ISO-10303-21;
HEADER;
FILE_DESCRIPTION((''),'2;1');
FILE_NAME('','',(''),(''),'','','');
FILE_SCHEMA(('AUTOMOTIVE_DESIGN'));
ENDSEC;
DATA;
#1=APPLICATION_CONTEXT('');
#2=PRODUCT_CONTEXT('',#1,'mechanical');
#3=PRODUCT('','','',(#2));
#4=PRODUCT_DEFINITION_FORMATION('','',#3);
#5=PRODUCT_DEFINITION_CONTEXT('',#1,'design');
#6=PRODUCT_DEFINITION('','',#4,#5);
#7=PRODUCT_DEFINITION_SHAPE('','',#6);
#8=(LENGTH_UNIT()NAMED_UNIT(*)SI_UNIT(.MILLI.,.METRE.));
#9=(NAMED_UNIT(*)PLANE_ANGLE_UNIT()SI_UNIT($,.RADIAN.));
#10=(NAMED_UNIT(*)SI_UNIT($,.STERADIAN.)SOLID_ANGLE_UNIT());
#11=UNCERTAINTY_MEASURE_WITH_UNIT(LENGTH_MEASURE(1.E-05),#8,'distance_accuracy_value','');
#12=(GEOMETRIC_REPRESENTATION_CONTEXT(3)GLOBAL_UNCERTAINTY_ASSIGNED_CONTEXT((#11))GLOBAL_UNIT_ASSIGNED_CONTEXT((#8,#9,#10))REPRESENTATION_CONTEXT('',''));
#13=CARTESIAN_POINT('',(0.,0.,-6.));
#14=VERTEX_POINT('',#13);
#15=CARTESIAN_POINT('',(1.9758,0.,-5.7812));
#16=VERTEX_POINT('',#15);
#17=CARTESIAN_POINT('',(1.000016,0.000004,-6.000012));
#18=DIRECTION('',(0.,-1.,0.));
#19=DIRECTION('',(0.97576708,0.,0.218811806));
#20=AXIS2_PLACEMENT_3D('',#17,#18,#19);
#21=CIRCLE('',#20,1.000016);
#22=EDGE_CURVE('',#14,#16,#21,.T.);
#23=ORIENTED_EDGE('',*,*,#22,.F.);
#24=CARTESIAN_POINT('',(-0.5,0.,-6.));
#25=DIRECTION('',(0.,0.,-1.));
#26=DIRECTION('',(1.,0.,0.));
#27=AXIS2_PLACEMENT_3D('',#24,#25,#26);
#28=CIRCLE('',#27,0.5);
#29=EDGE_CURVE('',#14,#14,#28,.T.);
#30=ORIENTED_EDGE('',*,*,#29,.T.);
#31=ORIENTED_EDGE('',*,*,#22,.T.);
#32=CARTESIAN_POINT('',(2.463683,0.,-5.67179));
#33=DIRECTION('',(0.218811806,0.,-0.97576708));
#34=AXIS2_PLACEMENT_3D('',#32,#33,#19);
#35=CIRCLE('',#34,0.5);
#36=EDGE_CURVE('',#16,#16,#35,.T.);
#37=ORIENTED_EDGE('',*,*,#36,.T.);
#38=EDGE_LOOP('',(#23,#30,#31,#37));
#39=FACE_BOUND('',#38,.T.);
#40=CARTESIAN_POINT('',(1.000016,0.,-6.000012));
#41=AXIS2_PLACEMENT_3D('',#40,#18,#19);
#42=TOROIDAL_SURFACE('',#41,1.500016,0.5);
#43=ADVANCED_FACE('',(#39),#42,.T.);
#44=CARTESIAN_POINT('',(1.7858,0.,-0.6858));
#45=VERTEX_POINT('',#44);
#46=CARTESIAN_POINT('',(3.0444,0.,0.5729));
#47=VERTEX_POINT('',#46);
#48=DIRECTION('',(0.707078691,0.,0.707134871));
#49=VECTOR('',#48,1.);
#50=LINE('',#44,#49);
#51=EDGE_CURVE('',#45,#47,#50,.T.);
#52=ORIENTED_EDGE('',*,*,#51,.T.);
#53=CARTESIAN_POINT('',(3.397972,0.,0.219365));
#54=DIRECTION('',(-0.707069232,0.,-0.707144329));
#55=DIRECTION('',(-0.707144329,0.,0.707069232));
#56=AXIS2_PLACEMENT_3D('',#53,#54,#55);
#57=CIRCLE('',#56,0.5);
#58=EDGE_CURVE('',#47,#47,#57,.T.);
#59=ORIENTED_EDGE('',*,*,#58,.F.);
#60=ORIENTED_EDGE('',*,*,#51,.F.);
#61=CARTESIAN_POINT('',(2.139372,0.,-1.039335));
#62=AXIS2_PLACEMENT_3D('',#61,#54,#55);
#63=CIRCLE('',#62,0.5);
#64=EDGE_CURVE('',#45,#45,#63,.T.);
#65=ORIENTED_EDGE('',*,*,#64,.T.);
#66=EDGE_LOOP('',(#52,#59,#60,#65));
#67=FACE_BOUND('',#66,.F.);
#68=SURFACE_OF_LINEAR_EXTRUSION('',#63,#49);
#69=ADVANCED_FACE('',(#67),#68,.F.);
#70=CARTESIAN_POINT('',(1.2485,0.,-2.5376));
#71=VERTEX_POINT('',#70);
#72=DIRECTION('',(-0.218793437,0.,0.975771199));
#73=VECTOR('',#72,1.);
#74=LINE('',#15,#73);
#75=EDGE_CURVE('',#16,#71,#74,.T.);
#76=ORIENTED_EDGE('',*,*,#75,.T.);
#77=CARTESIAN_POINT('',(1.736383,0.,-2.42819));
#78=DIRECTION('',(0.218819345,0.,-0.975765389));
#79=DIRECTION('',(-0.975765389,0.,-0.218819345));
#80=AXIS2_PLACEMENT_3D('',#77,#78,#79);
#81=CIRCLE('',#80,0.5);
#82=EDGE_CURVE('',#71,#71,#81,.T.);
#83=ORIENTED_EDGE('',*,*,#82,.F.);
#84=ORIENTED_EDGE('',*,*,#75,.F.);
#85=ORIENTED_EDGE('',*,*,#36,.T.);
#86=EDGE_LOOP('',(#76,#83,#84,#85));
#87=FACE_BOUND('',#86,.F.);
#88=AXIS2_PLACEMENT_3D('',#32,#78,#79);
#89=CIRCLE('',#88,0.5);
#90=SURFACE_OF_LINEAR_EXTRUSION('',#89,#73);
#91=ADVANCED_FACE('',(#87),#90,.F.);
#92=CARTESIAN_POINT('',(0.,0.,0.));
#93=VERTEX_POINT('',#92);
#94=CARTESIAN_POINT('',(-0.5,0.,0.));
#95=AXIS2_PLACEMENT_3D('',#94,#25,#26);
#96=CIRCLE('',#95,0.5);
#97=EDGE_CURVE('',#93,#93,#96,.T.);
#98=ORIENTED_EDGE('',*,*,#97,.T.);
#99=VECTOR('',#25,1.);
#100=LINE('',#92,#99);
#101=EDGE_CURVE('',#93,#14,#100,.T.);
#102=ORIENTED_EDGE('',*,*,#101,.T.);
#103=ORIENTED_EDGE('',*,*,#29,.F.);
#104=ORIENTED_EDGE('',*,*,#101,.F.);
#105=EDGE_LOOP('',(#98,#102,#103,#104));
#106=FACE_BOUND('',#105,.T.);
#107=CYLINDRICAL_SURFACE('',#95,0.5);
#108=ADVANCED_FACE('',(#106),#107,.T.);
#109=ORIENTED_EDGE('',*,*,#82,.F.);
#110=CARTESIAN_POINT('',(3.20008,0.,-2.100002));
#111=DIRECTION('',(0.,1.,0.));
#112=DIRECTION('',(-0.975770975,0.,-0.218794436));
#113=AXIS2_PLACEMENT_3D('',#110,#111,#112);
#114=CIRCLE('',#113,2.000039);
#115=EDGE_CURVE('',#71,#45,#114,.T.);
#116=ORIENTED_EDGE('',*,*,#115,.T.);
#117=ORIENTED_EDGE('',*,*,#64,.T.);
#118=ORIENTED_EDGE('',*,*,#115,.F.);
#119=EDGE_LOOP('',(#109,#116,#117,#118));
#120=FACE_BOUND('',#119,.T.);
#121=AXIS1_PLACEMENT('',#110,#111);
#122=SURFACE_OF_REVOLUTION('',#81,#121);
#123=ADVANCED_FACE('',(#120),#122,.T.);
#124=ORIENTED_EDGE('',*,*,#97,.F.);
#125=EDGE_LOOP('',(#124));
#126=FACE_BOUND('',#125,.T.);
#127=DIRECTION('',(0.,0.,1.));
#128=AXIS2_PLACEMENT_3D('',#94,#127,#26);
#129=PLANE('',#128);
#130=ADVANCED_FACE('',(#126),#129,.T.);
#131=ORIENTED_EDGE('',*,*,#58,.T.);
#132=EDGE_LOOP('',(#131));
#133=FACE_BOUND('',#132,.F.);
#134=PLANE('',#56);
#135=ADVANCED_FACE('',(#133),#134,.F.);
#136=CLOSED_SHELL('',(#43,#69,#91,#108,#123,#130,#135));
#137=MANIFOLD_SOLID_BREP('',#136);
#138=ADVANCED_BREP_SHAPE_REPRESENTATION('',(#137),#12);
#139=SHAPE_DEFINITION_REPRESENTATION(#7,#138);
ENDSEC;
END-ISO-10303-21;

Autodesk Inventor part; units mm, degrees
ref_plane "YZ Plane" through (0, 0, 0) normal (1, 0, 0) x (0, 1, 0)
ref_plane "XZ Plane" through (0, 0, 0) normal (0, 1, 0) x (-1, 0, 0)
ref_plane "XY Plane" through (0, 0, 0) normal (0, 0, 1) x (1, 0, 0)
sketch "Sketch1" plane through (0, 0, 0) normal (0, 1, 0) x (-1, 0, 0)
  line L0 (0, 0) -> (0, -6)
  arc A0 (-1.9758, -5.7812) -> (0, -6) centre (-1, -6) ccw
  line L1 (-1.9758, -5.7812) -> (-1.2485, -2.5376)
  line L2 (-1.7858, -0.6858) -> (-3.0444, 0.5729)
  arc A1 (-1.2485, -2.5376) -> (-1.7858, -0.6858) centre (-3.2, -2.1) ccw
  dimension "d0" = 2
  dimension "d1" = 1
  dimension "d2" = 6
  dimension "d3" = 1.78
  dimension "d4" = 3.9
  dimension "d5" = 2.2
  dimension "d6" = 45
sketch "Sketch2" plane through (0, 0, 0) normal (0, 0, 1) x (1, 0, 0)
  circle A0 centre (-0.5, 0) radius 0.5
  point P0 (0, 0)
  point P1 (0, 0)
  dimension "d8" = 1
  dimension "d9" = 0.5
sweep "Sweep1" add profiles "Sketch2" path "Sketch1"
properties part number "500-177" material "Steel"
